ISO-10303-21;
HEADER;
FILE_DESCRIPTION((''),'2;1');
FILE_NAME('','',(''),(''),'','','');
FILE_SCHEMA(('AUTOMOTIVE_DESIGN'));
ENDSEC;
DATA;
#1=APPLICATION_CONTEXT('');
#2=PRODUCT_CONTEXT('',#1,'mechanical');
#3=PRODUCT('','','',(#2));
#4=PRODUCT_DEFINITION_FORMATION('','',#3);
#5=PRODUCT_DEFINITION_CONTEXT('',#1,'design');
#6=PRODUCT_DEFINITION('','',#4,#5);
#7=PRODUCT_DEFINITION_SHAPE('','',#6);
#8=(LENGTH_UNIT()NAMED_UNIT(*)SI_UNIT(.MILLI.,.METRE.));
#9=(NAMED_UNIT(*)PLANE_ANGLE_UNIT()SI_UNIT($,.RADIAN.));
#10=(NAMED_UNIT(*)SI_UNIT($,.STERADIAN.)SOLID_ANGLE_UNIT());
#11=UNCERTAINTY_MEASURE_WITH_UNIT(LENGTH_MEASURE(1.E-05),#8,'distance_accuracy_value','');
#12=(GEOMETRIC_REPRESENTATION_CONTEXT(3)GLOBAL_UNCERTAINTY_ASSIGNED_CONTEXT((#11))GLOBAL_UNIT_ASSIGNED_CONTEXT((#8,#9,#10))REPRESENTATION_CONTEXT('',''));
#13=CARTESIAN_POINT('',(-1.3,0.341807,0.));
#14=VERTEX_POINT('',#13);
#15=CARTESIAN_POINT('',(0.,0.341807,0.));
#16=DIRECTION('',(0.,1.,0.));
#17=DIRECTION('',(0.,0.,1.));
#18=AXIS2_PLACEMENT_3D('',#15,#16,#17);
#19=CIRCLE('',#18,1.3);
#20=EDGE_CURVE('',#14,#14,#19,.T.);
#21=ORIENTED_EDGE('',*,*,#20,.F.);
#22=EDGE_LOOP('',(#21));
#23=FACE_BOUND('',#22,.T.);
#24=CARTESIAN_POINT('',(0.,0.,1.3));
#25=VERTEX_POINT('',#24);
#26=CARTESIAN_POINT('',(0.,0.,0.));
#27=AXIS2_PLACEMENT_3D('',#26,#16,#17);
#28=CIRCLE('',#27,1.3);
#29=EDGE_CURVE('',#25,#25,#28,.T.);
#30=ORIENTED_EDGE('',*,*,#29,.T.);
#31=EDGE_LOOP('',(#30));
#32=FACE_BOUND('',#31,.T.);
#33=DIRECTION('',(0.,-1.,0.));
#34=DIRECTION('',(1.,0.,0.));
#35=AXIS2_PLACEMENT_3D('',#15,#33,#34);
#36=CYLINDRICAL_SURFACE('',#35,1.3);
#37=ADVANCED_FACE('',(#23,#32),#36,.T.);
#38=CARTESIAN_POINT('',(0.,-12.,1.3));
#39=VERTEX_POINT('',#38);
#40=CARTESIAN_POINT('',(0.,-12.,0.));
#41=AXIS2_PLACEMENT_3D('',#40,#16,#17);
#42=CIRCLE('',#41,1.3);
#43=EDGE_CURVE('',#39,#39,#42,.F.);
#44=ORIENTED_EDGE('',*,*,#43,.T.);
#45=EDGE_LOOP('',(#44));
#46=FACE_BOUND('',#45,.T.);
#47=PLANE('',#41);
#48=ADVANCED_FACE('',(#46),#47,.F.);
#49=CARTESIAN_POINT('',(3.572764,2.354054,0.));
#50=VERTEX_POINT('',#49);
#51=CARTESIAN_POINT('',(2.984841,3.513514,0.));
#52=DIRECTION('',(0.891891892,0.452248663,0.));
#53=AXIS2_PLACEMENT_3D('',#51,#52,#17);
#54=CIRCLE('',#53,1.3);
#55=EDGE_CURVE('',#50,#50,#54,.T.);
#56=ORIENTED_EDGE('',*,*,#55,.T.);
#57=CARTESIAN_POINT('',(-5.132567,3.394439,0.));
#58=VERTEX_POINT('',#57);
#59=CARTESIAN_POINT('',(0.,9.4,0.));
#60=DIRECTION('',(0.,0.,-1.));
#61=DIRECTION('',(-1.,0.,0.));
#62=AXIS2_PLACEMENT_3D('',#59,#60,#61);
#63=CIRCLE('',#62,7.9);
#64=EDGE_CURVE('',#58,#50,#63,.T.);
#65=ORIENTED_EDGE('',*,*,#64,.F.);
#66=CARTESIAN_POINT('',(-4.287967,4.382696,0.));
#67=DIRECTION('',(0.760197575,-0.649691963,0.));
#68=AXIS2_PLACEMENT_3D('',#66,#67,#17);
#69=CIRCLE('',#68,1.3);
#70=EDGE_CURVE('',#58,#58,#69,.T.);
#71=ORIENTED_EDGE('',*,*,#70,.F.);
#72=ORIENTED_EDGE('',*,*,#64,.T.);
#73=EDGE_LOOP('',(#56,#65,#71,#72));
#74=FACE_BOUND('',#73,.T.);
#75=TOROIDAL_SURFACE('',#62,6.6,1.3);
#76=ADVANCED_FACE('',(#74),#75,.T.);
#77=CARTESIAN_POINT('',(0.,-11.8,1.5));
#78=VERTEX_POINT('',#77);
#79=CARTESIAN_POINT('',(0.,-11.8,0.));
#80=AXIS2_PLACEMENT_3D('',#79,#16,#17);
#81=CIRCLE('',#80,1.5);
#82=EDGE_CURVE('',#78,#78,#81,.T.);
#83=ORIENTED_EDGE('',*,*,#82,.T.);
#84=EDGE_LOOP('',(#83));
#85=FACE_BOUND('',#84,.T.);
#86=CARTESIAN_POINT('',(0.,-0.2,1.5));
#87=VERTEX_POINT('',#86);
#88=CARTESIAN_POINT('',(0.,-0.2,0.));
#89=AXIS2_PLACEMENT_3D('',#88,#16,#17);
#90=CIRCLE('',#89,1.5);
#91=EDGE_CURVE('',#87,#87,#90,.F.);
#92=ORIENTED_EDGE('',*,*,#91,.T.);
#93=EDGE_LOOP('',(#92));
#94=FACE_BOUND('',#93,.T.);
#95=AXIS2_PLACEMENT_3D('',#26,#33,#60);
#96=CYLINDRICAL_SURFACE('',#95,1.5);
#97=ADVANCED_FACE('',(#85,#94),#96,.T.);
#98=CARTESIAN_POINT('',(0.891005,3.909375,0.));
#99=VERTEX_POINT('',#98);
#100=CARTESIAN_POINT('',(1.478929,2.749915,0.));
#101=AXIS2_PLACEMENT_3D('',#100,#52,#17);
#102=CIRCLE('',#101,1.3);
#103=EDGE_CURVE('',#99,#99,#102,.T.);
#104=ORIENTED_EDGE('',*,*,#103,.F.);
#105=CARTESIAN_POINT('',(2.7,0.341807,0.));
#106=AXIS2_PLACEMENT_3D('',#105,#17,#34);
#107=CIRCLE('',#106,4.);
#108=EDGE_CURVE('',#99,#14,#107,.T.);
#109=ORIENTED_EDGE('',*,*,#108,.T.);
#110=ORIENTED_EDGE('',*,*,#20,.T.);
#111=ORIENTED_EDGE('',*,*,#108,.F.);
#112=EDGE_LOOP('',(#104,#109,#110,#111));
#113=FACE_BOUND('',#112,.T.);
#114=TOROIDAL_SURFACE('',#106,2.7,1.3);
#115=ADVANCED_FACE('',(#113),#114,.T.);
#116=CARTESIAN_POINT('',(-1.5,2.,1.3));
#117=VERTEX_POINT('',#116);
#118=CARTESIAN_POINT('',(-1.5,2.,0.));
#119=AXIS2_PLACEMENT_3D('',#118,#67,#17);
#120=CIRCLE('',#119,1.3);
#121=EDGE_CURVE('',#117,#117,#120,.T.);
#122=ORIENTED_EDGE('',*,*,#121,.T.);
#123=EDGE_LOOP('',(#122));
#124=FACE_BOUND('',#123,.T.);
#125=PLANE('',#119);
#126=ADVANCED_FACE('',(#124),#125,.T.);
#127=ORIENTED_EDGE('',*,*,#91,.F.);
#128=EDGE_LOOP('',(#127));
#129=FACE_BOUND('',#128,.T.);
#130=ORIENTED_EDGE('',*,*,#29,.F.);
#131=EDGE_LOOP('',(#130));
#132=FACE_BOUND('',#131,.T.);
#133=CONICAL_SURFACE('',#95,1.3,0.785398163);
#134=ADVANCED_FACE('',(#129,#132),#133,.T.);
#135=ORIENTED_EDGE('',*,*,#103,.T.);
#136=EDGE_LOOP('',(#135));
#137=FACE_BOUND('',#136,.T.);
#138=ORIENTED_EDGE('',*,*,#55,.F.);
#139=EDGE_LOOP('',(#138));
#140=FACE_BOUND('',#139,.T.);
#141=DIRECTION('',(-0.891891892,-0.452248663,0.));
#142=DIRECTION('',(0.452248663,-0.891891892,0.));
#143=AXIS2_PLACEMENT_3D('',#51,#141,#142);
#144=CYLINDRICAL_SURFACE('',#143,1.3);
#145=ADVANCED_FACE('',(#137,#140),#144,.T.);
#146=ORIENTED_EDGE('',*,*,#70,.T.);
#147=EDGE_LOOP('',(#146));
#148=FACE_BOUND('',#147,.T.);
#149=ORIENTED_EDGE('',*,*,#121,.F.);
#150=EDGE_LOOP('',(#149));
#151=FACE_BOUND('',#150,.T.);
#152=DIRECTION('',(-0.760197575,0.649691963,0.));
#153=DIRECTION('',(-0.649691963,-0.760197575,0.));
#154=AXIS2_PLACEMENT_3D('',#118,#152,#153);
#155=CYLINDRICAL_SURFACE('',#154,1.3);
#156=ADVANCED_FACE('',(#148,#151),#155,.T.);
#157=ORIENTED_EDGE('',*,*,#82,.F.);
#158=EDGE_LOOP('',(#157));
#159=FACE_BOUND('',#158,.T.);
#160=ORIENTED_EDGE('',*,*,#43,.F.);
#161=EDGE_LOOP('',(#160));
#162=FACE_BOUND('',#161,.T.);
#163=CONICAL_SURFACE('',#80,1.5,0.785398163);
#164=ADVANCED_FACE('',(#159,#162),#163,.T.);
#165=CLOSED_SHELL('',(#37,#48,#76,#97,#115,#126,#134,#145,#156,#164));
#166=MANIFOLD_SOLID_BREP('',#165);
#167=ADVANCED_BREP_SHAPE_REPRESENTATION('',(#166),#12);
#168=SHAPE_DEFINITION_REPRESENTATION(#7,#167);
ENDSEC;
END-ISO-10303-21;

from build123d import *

# Parameters (mm, degrees)
SKETCH29_R    = 1.5
SKETCH28_R    = 1.3
CHAMFER1_SIZE = 0.2


with BuildPart() as part:
    # Sweep1: sweep along a path in Sketch2
    with BuildLine(Plane.XY) as sweep1_path:
        Line((0, 0), (0, -12))
    # Sketch29 → Sweep1 (sweep)
    with BuildSketch(Plane(origin=(0, 0, 0), x_dir=(1, 0, 0), z_dir=(0, 1, 0))):
        Circle(SKETCH29_R)
    sweep(path=sweep1_path.line)

    # Sweep4: sweep along a path in Sketch7
    with BuildLine(Plane.XY) as sweep4_path:
        Line((0, 0), (0, 0.341807316))
        ThreePointArc((0, 0.341807316), (0.39925091, 1.754801875), (1.47892861, 2.749915424))
        Line((1.47892861, 2.749915424), (2.984841176, 3.513513514))
        ThreePointArc((2.984841176, 3.513513514), (0.783200964, 15.953365261), (-4.287966956, 4.382696005))
        Line((-4.287966956, 4.382696005), (-1.5, 2))
    # Sketch28 → Sweep4 (sweep)
    with BuildSketch(Plane(origin=(0, 0, 0), x_dir=(1, 0, 0), z_dir=(0, 1, 0))):
        Circle(SKETCH28_R)
    sweep(path=sweep4_path.line)

    # Chamfer1
    chamfer1_edges = [part.edges().sort_by_distance(p)[0] for p in [
        (-1.5, 0, 0),
        (-1.5, -12, 0),
    ]]
    chamfer(chamfer1_edges, length=CHAMFER1_SIZE - 0.0001)  # a hair under: the kernel refuses the full size


solid = part.part
